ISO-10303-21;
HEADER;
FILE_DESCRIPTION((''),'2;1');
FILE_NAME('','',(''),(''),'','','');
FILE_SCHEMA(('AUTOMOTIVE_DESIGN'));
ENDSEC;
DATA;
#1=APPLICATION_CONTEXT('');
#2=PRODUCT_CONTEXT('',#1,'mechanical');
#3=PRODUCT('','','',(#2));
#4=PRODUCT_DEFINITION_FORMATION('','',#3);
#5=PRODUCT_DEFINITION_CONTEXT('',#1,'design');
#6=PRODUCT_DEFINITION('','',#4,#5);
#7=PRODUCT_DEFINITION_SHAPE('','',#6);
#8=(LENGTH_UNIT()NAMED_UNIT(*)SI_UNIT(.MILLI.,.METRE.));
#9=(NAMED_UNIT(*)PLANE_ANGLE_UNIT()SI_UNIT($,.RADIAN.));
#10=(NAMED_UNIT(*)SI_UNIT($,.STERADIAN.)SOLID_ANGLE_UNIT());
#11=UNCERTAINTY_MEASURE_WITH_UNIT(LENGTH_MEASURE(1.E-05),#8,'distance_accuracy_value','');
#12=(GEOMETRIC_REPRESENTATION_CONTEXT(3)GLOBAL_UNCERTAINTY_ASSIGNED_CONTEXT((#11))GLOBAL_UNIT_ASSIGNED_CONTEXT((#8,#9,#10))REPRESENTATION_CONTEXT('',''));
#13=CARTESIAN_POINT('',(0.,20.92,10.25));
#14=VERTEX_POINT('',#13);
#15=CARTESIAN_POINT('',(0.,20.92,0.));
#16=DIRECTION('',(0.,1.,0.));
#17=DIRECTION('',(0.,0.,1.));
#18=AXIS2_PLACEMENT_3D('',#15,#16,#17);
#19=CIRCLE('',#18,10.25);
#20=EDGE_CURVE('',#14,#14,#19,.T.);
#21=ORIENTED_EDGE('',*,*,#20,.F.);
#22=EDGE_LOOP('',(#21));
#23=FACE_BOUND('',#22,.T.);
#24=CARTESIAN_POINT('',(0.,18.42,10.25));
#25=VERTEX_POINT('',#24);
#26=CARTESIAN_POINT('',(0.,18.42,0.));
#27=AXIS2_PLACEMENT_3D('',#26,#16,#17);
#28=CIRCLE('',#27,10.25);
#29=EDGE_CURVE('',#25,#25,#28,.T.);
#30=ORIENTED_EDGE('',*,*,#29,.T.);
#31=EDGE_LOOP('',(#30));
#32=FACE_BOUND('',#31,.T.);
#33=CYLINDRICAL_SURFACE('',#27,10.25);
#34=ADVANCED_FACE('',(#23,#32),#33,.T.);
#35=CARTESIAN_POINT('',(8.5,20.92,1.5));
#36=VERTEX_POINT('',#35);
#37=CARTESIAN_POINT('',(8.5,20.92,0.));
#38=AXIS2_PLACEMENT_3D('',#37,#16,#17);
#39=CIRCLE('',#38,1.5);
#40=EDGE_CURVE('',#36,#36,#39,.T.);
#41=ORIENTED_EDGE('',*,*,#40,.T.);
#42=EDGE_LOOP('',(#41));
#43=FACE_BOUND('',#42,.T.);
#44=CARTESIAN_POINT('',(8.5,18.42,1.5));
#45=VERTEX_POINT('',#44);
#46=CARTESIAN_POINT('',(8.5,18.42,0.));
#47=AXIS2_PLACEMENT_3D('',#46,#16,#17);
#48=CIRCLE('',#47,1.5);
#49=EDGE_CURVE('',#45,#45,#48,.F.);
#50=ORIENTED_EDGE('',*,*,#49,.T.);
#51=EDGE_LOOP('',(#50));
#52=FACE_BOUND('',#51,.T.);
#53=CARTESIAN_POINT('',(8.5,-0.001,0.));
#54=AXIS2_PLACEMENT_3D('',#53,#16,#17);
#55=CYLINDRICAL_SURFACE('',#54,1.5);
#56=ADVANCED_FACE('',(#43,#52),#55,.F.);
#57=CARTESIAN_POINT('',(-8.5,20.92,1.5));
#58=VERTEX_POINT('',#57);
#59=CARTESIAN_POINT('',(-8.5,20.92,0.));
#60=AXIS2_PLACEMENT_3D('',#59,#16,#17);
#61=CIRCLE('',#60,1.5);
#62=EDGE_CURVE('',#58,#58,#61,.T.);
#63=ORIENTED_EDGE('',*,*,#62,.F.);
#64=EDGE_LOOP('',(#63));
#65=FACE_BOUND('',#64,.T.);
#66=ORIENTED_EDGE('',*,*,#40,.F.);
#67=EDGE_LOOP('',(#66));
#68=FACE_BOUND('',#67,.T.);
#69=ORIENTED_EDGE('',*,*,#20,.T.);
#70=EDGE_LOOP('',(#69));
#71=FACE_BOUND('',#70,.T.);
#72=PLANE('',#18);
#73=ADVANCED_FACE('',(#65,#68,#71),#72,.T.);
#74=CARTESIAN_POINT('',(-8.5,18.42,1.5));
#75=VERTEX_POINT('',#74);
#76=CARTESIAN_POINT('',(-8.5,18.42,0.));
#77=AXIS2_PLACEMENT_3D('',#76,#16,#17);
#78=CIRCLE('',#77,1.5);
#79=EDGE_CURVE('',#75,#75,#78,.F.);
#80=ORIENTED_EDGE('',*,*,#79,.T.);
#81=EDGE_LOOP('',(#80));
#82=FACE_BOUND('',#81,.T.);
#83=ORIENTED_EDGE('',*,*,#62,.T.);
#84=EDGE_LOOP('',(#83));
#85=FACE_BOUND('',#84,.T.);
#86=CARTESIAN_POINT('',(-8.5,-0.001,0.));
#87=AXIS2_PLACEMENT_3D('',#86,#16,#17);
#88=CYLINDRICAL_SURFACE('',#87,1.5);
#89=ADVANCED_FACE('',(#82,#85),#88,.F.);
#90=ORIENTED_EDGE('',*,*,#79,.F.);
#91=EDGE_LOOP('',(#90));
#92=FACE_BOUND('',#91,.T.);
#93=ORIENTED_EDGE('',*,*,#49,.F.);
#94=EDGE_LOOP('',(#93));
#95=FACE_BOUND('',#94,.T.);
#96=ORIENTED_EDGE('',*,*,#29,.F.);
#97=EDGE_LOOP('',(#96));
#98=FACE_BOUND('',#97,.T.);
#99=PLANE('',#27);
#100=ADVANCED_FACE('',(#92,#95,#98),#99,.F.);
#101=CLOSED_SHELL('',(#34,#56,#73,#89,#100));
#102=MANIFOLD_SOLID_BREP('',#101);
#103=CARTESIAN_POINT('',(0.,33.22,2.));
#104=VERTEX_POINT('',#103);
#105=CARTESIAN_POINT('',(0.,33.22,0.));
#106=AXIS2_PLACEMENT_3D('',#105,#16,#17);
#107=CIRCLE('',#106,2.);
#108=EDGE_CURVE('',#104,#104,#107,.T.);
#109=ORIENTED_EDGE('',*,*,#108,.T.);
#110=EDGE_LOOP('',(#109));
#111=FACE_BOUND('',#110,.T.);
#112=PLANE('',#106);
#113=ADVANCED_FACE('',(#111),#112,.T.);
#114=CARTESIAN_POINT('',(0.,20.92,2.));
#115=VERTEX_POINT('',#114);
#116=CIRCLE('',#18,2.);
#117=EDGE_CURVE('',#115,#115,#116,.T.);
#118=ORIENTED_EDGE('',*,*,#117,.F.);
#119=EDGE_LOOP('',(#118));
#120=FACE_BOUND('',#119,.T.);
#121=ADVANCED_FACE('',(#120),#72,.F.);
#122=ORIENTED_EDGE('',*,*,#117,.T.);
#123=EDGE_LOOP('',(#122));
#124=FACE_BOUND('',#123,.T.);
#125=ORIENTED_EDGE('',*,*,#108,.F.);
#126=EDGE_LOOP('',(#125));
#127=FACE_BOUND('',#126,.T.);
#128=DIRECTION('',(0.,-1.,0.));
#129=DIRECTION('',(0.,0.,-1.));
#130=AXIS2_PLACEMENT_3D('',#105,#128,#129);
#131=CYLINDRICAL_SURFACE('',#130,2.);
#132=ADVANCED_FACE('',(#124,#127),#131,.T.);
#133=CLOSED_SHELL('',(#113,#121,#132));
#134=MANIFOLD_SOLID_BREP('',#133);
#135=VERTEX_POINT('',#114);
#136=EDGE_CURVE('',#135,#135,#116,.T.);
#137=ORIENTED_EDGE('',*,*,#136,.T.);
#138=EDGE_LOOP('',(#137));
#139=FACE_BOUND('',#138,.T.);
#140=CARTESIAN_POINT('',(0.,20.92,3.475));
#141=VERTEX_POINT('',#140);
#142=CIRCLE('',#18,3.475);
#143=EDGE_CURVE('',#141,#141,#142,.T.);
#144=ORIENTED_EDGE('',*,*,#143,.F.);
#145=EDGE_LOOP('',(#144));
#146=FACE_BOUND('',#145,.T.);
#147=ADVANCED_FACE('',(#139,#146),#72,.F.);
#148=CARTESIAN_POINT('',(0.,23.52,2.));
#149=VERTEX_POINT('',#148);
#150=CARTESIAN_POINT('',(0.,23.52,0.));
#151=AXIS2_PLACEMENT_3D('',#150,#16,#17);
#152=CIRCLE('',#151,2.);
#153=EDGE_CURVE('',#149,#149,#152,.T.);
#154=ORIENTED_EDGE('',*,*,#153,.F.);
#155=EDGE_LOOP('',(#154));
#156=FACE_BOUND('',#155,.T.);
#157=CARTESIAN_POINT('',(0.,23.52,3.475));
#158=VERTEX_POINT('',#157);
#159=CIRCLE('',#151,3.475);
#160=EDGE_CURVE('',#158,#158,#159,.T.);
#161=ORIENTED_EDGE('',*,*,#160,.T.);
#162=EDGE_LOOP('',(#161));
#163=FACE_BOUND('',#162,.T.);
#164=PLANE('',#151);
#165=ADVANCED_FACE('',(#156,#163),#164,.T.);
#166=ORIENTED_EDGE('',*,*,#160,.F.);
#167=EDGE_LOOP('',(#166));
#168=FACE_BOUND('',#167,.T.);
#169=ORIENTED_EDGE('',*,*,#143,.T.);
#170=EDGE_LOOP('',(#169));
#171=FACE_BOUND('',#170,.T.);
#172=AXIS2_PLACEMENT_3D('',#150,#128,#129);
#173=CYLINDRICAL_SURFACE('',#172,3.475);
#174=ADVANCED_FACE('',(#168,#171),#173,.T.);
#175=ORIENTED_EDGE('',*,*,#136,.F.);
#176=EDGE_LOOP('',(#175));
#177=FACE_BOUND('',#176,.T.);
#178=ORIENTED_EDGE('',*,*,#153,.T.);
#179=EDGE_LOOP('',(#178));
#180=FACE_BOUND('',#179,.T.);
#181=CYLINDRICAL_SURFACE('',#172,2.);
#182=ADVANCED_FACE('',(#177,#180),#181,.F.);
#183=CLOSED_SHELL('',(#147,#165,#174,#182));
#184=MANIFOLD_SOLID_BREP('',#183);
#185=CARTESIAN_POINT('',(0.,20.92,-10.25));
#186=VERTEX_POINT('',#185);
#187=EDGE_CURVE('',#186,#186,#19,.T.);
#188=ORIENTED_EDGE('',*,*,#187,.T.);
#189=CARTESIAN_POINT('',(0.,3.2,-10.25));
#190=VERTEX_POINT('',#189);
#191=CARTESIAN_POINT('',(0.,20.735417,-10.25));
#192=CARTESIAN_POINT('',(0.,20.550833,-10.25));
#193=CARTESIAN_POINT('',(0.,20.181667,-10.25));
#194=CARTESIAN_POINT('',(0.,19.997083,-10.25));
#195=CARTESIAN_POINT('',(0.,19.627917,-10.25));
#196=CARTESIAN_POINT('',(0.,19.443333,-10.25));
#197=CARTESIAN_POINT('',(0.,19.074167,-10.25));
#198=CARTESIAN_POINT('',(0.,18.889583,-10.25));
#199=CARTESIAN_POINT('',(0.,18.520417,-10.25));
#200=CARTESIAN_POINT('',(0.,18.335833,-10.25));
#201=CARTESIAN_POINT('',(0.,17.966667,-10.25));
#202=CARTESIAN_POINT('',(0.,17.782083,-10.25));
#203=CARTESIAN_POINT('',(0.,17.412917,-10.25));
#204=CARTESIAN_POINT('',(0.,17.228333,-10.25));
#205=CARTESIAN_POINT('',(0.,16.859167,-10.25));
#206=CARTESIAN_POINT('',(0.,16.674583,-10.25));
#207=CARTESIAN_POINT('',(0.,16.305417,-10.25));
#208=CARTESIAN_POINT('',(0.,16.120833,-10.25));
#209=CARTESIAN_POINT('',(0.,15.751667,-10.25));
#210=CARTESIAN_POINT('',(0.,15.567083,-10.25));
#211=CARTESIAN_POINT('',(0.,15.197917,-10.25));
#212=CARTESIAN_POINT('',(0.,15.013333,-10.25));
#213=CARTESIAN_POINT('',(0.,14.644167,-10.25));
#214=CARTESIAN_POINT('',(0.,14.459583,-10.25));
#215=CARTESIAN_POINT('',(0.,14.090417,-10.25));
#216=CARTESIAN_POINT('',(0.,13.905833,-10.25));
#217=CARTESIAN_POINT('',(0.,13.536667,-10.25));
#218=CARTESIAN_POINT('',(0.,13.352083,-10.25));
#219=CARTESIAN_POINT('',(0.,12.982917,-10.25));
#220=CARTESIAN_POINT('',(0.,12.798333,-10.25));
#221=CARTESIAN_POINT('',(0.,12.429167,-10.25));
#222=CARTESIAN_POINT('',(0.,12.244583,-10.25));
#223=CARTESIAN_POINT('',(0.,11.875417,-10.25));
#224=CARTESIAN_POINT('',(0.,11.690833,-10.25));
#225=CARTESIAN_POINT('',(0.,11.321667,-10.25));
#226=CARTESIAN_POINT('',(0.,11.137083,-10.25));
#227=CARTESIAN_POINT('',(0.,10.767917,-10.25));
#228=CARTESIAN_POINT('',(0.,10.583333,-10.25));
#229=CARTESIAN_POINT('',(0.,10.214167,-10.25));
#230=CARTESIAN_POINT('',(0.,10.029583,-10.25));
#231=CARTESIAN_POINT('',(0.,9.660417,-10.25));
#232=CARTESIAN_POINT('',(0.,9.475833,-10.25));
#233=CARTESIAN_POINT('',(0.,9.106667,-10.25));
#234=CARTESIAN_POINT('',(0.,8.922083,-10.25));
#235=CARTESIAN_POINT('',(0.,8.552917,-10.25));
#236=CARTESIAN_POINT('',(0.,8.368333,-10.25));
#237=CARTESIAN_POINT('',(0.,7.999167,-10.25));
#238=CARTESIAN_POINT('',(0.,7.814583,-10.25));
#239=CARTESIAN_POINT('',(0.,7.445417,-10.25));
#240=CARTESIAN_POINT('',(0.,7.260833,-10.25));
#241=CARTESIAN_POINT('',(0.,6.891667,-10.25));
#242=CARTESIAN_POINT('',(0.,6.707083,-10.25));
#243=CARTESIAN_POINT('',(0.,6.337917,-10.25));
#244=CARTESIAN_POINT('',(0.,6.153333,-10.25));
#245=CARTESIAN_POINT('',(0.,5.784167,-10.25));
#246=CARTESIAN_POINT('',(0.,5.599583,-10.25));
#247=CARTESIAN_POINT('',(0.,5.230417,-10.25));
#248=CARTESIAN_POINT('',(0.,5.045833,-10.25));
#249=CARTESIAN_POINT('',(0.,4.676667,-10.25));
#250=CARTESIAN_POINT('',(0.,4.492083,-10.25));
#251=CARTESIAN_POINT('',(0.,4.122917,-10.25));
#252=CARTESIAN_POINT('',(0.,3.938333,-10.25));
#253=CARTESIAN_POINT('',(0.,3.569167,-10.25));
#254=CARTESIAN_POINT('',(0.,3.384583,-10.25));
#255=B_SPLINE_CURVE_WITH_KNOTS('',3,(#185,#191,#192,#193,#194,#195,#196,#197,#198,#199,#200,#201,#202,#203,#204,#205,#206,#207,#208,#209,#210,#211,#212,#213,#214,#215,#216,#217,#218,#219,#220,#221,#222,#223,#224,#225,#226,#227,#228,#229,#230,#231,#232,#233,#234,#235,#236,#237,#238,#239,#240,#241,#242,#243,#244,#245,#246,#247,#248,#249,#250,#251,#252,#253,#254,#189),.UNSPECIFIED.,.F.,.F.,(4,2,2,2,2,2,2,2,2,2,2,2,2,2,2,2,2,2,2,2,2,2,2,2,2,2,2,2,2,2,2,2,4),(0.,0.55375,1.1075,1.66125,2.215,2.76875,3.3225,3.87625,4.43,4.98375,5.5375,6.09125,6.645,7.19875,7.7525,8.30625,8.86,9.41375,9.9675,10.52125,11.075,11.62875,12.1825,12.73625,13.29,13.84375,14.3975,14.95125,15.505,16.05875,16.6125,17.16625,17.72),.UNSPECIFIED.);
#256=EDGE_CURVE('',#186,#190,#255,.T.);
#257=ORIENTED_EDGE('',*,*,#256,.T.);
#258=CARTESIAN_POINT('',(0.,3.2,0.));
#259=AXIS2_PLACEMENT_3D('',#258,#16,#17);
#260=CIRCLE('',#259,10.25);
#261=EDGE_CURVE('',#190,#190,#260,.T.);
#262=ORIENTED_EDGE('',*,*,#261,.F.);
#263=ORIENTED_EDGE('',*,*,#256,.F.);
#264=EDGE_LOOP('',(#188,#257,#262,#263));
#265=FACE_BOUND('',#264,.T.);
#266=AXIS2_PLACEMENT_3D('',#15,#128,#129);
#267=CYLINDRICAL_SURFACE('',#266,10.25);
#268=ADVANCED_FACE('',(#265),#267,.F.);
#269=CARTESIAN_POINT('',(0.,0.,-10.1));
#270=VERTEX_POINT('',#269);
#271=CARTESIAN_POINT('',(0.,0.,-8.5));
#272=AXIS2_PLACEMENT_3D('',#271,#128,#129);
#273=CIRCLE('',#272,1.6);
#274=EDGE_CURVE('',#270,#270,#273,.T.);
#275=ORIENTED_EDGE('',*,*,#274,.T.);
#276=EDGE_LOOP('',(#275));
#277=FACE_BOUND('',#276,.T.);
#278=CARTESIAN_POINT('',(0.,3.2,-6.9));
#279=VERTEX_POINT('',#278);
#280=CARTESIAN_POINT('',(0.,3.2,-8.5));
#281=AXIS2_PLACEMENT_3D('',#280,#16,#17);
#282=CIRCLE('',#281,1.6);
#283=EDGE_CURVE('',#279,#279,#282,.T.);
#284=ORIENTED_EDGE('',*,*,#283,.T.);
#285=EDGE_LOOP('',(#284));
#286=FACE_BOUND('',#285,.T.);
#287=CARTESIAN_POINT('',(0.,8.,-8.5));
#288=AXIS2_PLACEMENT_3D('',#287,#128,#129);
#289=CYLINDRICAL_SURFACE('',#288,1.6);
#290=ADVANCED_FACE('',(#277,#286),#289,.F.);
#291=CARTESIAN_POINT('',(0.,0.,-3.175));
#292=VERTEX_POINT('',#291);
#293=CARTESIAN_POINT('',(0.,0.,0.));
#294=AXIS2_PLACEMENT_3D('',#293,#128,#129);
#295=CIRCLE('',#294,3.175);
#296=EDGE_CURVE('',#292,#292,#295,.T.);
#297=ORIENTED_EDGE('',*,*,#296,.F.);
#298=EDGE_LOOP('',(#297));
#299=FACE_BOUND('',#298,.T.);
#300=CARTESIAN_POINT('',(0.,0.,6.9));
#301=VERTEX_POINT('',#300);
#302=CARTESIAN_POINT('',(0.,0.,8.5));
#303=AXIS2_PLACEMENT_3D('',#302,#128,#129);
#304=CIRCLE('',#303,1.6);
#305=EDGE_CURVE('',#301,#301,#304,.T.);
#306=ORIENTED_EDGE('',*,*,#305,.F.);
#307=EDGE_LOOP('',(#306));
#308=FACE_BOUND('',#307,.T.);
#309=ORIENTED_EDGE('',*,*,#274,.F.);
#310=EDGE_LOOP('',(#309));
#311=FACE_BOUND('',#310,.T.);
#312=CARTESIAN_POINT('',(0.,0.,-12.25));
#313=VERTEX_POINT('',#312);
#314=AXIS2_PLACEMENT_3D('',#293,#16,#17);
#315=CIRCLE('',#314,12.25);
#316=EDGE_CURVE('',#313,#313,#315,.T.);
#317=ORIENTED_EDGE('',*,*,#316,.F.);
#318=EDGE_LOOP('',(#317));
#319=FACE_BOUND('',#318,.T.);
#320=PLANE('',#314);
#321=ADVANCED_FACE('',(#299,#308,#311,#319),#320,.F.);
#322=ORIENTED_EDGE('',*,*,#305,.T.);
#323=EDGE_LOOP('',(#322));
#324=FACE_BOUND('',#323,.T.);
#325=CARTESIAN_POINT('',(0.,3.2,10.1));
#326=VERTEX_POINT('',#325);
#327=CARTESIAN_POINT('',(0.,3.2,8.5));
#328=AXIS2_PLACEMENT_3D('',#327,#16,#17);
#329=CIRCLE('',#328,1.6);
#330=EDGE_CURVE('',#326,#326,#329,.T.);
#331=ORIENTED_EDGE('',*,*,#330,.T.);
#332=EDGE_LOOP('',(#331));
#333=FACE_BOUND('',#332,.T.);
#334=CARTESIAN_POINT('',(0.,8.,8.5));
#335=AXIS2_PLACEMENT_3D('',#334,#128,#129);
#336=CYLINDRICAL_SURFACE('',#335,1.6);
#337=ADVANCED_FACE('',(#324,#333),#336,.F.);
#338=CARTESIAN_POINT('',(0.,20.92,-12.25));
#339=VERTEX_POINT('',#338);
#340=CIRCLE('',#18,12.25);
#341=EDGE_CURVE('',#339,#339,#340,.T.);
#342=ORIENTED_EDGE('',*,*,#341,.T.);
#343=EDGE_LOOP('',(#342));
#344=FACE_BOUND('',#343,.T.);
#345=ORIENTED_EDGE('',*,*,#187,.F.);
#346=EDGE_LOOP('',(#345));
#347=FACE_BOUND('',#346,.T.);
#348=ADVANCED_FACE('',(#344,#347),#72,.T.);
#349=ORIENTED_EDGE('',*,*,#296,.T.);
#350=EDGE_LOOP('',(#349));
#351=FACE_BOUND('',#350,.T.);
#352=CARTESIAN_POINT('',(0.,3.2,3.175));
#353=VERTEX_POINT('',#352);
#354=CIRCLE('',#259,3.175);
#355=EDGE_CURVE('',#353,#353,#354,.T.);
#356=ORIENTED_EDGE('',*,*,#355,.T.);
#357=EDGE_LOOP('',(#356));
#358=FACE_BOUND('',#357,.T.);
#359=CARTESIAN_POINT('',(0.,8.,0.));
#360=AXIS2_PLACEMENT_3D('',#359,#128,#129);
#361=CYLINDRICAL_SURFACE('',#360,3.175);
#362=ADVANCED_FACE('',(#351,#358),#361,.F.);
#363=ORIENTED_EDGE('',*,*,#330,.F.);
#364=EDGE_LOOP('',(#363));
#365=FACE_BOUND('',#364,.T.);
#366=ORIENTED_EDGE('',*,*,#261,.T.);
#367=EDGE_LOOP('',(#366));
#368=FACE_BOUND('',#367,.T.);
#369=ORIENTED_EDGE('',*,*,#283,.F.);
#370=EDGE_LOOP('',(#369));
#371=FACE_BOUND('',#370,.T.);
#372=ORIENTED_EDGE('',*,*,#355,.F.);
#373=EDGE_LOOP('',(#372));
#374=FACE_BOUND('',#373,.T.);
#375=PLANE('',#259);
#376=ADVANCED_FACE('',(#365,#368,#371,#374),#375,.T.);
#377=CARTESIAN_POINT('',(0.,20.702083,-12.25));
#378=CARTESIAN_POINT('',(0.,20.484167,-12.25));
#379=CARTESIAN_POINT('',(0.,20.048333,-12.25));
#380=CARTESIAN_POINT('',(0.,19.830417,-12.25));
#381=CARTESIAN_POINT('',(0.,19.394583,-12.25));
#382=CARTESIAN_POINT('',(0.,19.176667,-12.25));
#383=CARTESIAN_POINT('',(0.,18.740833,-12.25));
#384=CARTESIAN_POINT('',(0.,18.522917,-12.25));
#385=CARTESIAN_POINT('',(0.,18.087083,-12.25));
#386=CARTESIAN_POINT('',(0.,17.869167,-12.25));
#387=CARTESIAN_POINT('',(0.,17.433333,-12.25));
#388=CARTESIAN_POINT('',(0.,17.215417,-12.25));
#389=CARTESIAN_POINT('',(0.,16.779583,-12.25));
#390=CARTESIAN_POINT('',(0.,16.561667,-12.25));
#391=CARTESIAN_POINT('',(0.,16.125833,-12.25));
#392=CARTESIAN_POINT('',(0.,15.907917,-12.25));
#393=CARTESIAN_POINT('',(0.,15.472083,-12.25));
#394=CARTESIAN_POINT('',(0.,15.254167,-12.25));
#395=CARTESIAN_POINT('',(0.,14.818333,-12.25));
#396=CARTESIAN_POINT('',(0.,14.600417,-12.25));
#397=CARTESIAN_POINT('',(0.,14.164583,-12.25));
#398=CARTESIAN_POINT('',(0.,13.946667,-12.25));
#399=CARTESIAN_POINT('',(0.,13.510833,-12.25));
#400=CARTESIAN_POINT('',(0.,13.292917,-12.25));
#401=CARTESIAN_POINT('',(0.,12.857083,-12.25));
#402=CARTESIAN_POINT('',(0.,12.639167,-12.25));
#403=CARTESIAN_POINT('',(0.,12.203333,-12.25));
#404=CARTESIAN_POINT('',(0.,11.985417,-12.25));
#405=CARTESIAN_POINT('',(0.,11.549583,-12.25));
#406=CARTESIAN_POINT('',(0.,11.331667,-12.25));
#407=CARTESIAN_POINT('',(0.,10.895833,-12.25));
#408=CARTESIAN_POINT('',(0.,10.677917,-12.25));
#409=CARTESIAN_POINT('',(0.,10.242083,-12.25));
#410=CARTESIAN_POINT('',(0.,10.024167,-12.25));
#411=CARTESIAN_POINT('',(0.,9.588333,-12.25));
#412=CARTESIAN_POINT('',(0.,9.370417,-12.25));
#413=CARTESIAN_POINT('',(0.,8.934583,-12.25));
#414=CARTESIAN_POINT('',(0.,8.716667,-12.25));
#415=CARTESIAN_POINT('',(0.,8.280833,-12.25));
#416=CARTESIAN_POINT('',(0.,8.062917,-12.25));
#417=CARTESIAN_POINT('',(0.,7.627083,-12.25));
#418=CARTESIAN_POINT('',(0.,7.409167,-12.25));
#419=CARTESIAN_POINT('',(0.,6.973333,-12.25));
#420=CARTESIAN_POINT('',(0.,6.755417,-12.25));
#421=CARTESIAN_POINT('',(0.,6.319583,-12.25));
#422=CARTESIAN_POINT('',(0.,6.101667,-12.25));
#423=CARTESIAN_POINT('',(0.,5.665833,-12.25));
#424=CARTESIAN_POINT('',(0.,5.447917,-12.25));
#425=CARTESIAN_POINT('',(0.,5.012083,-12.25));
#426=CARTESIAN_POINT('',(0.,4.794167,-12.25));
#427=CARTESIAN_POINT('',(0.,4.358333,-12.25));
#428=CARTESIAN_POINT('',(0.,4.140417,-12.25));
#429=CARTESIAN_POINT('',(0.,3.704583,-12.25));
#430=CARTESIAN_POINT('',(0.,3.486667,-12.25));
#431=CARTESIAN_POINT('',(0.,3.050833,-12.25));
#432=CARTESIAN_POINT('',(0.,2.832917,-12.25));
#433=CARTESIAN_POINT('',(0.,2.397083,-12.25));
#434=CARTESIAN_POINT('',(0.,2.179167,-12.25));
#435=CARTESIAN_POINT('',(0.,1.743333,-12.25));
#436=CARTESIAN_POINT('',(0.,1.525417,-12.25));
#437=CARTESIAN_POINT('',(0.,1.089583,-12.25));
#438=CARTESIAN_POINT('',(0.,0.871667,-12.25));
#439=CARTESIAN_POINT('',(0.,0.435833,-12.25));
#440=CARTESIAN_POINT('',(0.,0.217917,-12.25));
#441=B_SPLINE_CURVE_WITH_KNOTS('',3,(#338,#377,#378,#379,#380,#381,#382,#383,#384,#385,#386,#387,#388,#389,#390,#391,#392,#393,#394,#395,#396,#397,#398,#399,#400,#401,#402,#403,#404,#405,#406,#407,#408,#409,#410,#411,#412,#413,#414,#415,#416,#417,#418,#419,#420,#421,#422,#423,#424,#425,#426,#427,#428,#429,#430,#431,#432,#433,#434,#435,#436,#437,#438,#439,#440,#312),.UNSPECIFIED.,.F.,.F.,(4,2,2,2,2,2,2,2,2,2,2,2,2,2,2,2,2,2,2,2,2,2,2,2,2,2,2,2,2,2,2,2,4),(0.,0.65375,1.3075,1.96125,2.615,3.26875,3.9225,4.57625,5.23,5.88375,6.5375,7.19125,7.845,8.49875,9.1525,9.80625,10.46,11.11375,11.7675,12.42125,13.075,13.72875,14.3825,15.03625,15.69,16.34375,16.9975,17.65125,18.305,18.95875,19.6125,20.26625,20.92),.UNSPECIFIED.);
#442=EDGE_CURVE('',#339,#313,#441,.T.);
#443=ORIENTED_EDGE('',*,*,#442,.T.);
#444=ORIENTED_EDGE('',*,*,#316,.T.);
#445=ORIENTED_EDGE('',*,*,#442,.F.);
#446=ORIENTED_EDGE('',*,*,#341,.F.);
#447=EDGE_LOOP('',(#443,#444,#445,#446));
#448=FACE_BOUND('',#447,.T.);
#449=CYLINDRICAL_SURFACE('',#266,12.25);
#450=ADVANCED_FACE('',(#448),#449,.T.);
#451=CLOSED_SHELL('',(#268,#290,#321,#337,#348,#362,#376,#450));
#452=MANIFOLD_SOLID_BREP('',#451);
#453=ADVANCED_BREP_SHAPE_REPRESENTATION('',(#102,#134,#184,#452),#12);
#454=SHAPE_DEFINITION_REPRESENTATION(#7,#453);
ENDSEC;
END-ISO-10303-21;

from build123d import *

# Parameters (mm, degrees)
SKETCH1_R           = 12.25
BOSS_EXTRUDE1_DEPTH = 20.92
SHELL2_START        = 3.2
SHELL2_OUTLINE_R    = 10.25
SHELL2_DEPTH        = 17.72
SKETCH2_R           = 3.175
SKETCH2_R_2         = 1.6
CUT_EXTRUDE1_DEPTH  = 8
SKETCH3_R           = 2
BOSS_EXTRUDE2_DEPTH = 12.3
SKETCH3_3_R         = 3.475
SKETCH3_3_R_2       = 2
BOSS_EXTRUDE3_DEPTH = 2.6
SKETCH4_R           = 10.25
BOSS_EXTRUDE4_DEPTH = 2.5
SKETCH5_R           = 1.5
CUT_EXTRUDE2_DEPTH  = 2.5


# Read off the part's stored shape, not the designer's step: Shell2
with BuildPart() as part:
    # Sketch1 → Boss-Extrude1 (new body)
    with BuildSketch(Plane(origin=(0, 0, 0), x_dir=(1, 0, 0), z_dir=(0, 1, 0))):
        with Locations(Location((0, 0, 0), (0, 0, 90))):
            Circle(SKETCH1_R)
    extrude(amount=BOSS_EXTRUDE1_DEPTH)

    # Shell2 outline → Shell2 (cut)
    with BuildSketch(Plane(origin=(0, 0, 0), x_dir=(1, 0, 0), z_dir=(0, 1, 0)).offset(SHELL2_START)):
        Circle(SHELL2_OUTLINE_R)
    extrude(amount=SHELL2_DEPTH, mode=Mode.SUBTRACT)

    # Sketch2 → Cut-Extrude1 (cut)
    with BuildSketch(Plane.XZ):
        with Locations(Location((0, 0, 0), (0, 0, 270))):
            Circle(SKETCH2_R)
        with Locations(Location((0, 8.5, 0), (0, 0, 270))):
            Circle(SKETCH2_R_2)
        with Locations(Location((0, -8.5, 0), (0, 0, 270))):
            Circle(SKETCH2_R_2)
    extrude(amount=-CUT_EXTRUDE1_DEPTH, mode=Mode.SUBTRACT)


with BuildPart() as body_2:
    # Sketch3 → Boss-Extrude2 (new body)
    with BuildSketch(Plane(origin=(0, 20.92, 0), x_dir=(1, 0, 0), z_dir=(0, 1, 0))):
        with Locations(Location((0, 0, 0), (0, 0, 270))):
            Circle(SKETCH3_R)
    extrude(amount=BOSS_EXTRUDE2_DEPTH)


with BuildPart() as body_3:
    # Sketch3<3> → Boss-Extrude3 (new body)
    with BuildSketch(Plane(origin=(0, 20.92, 0), x_dir=(1, 0, 0), z_dir=(0, 1, 0))):
        with Locations(Location((0, 0, 0), (0, 0, 270))):
            Circle(SKETCH3_3_R)
        with Locations(Location((0, 0, 0), (0, 0, 270))):
            Circle(SKETCH3_3_R_2, mode=Mode.SUBTRACT)
    extrude(amount=BOSS_EXTRUDE3_DEPTH)


with BuildPart() as body_4:
    # Sketch4 → Boss-Extrude4 (new body)
    with BuildSketch(Plane(origin=(0, 20.92, 0), x_dir=(1, 0, 0), z_dir=(0, 1, 0))):
        with Locations(Location((0, 0, 0), (0, 0, 270))):
            Circle(SKETCH4_R)
    extrude(amount=-BOSS_EXTRUDE4_DEPTH)

    # Sketch5 → Cut-Extrude2 (cut)
    with BuildSketch(Plane(origin=(0, 20.92, 0), x_dir=(1, 0, 0), z_dir=(0, 1, 0))):
        with Locations(Location((-8.5, 0, 0), (0, 0, 270))):
            Circle(SKETCH5_R)
        with Locations(Location((8.5, 0, 0), (0, 0, 270))):
            Circle(SKETCH5_R)
    extrude(amount=-CUT_EXTRUDE2_DEPTH, mode=Mode.SUBTRACT)


solid = Compound([part.part, body_2.part, body_3.part, body_4.part])
